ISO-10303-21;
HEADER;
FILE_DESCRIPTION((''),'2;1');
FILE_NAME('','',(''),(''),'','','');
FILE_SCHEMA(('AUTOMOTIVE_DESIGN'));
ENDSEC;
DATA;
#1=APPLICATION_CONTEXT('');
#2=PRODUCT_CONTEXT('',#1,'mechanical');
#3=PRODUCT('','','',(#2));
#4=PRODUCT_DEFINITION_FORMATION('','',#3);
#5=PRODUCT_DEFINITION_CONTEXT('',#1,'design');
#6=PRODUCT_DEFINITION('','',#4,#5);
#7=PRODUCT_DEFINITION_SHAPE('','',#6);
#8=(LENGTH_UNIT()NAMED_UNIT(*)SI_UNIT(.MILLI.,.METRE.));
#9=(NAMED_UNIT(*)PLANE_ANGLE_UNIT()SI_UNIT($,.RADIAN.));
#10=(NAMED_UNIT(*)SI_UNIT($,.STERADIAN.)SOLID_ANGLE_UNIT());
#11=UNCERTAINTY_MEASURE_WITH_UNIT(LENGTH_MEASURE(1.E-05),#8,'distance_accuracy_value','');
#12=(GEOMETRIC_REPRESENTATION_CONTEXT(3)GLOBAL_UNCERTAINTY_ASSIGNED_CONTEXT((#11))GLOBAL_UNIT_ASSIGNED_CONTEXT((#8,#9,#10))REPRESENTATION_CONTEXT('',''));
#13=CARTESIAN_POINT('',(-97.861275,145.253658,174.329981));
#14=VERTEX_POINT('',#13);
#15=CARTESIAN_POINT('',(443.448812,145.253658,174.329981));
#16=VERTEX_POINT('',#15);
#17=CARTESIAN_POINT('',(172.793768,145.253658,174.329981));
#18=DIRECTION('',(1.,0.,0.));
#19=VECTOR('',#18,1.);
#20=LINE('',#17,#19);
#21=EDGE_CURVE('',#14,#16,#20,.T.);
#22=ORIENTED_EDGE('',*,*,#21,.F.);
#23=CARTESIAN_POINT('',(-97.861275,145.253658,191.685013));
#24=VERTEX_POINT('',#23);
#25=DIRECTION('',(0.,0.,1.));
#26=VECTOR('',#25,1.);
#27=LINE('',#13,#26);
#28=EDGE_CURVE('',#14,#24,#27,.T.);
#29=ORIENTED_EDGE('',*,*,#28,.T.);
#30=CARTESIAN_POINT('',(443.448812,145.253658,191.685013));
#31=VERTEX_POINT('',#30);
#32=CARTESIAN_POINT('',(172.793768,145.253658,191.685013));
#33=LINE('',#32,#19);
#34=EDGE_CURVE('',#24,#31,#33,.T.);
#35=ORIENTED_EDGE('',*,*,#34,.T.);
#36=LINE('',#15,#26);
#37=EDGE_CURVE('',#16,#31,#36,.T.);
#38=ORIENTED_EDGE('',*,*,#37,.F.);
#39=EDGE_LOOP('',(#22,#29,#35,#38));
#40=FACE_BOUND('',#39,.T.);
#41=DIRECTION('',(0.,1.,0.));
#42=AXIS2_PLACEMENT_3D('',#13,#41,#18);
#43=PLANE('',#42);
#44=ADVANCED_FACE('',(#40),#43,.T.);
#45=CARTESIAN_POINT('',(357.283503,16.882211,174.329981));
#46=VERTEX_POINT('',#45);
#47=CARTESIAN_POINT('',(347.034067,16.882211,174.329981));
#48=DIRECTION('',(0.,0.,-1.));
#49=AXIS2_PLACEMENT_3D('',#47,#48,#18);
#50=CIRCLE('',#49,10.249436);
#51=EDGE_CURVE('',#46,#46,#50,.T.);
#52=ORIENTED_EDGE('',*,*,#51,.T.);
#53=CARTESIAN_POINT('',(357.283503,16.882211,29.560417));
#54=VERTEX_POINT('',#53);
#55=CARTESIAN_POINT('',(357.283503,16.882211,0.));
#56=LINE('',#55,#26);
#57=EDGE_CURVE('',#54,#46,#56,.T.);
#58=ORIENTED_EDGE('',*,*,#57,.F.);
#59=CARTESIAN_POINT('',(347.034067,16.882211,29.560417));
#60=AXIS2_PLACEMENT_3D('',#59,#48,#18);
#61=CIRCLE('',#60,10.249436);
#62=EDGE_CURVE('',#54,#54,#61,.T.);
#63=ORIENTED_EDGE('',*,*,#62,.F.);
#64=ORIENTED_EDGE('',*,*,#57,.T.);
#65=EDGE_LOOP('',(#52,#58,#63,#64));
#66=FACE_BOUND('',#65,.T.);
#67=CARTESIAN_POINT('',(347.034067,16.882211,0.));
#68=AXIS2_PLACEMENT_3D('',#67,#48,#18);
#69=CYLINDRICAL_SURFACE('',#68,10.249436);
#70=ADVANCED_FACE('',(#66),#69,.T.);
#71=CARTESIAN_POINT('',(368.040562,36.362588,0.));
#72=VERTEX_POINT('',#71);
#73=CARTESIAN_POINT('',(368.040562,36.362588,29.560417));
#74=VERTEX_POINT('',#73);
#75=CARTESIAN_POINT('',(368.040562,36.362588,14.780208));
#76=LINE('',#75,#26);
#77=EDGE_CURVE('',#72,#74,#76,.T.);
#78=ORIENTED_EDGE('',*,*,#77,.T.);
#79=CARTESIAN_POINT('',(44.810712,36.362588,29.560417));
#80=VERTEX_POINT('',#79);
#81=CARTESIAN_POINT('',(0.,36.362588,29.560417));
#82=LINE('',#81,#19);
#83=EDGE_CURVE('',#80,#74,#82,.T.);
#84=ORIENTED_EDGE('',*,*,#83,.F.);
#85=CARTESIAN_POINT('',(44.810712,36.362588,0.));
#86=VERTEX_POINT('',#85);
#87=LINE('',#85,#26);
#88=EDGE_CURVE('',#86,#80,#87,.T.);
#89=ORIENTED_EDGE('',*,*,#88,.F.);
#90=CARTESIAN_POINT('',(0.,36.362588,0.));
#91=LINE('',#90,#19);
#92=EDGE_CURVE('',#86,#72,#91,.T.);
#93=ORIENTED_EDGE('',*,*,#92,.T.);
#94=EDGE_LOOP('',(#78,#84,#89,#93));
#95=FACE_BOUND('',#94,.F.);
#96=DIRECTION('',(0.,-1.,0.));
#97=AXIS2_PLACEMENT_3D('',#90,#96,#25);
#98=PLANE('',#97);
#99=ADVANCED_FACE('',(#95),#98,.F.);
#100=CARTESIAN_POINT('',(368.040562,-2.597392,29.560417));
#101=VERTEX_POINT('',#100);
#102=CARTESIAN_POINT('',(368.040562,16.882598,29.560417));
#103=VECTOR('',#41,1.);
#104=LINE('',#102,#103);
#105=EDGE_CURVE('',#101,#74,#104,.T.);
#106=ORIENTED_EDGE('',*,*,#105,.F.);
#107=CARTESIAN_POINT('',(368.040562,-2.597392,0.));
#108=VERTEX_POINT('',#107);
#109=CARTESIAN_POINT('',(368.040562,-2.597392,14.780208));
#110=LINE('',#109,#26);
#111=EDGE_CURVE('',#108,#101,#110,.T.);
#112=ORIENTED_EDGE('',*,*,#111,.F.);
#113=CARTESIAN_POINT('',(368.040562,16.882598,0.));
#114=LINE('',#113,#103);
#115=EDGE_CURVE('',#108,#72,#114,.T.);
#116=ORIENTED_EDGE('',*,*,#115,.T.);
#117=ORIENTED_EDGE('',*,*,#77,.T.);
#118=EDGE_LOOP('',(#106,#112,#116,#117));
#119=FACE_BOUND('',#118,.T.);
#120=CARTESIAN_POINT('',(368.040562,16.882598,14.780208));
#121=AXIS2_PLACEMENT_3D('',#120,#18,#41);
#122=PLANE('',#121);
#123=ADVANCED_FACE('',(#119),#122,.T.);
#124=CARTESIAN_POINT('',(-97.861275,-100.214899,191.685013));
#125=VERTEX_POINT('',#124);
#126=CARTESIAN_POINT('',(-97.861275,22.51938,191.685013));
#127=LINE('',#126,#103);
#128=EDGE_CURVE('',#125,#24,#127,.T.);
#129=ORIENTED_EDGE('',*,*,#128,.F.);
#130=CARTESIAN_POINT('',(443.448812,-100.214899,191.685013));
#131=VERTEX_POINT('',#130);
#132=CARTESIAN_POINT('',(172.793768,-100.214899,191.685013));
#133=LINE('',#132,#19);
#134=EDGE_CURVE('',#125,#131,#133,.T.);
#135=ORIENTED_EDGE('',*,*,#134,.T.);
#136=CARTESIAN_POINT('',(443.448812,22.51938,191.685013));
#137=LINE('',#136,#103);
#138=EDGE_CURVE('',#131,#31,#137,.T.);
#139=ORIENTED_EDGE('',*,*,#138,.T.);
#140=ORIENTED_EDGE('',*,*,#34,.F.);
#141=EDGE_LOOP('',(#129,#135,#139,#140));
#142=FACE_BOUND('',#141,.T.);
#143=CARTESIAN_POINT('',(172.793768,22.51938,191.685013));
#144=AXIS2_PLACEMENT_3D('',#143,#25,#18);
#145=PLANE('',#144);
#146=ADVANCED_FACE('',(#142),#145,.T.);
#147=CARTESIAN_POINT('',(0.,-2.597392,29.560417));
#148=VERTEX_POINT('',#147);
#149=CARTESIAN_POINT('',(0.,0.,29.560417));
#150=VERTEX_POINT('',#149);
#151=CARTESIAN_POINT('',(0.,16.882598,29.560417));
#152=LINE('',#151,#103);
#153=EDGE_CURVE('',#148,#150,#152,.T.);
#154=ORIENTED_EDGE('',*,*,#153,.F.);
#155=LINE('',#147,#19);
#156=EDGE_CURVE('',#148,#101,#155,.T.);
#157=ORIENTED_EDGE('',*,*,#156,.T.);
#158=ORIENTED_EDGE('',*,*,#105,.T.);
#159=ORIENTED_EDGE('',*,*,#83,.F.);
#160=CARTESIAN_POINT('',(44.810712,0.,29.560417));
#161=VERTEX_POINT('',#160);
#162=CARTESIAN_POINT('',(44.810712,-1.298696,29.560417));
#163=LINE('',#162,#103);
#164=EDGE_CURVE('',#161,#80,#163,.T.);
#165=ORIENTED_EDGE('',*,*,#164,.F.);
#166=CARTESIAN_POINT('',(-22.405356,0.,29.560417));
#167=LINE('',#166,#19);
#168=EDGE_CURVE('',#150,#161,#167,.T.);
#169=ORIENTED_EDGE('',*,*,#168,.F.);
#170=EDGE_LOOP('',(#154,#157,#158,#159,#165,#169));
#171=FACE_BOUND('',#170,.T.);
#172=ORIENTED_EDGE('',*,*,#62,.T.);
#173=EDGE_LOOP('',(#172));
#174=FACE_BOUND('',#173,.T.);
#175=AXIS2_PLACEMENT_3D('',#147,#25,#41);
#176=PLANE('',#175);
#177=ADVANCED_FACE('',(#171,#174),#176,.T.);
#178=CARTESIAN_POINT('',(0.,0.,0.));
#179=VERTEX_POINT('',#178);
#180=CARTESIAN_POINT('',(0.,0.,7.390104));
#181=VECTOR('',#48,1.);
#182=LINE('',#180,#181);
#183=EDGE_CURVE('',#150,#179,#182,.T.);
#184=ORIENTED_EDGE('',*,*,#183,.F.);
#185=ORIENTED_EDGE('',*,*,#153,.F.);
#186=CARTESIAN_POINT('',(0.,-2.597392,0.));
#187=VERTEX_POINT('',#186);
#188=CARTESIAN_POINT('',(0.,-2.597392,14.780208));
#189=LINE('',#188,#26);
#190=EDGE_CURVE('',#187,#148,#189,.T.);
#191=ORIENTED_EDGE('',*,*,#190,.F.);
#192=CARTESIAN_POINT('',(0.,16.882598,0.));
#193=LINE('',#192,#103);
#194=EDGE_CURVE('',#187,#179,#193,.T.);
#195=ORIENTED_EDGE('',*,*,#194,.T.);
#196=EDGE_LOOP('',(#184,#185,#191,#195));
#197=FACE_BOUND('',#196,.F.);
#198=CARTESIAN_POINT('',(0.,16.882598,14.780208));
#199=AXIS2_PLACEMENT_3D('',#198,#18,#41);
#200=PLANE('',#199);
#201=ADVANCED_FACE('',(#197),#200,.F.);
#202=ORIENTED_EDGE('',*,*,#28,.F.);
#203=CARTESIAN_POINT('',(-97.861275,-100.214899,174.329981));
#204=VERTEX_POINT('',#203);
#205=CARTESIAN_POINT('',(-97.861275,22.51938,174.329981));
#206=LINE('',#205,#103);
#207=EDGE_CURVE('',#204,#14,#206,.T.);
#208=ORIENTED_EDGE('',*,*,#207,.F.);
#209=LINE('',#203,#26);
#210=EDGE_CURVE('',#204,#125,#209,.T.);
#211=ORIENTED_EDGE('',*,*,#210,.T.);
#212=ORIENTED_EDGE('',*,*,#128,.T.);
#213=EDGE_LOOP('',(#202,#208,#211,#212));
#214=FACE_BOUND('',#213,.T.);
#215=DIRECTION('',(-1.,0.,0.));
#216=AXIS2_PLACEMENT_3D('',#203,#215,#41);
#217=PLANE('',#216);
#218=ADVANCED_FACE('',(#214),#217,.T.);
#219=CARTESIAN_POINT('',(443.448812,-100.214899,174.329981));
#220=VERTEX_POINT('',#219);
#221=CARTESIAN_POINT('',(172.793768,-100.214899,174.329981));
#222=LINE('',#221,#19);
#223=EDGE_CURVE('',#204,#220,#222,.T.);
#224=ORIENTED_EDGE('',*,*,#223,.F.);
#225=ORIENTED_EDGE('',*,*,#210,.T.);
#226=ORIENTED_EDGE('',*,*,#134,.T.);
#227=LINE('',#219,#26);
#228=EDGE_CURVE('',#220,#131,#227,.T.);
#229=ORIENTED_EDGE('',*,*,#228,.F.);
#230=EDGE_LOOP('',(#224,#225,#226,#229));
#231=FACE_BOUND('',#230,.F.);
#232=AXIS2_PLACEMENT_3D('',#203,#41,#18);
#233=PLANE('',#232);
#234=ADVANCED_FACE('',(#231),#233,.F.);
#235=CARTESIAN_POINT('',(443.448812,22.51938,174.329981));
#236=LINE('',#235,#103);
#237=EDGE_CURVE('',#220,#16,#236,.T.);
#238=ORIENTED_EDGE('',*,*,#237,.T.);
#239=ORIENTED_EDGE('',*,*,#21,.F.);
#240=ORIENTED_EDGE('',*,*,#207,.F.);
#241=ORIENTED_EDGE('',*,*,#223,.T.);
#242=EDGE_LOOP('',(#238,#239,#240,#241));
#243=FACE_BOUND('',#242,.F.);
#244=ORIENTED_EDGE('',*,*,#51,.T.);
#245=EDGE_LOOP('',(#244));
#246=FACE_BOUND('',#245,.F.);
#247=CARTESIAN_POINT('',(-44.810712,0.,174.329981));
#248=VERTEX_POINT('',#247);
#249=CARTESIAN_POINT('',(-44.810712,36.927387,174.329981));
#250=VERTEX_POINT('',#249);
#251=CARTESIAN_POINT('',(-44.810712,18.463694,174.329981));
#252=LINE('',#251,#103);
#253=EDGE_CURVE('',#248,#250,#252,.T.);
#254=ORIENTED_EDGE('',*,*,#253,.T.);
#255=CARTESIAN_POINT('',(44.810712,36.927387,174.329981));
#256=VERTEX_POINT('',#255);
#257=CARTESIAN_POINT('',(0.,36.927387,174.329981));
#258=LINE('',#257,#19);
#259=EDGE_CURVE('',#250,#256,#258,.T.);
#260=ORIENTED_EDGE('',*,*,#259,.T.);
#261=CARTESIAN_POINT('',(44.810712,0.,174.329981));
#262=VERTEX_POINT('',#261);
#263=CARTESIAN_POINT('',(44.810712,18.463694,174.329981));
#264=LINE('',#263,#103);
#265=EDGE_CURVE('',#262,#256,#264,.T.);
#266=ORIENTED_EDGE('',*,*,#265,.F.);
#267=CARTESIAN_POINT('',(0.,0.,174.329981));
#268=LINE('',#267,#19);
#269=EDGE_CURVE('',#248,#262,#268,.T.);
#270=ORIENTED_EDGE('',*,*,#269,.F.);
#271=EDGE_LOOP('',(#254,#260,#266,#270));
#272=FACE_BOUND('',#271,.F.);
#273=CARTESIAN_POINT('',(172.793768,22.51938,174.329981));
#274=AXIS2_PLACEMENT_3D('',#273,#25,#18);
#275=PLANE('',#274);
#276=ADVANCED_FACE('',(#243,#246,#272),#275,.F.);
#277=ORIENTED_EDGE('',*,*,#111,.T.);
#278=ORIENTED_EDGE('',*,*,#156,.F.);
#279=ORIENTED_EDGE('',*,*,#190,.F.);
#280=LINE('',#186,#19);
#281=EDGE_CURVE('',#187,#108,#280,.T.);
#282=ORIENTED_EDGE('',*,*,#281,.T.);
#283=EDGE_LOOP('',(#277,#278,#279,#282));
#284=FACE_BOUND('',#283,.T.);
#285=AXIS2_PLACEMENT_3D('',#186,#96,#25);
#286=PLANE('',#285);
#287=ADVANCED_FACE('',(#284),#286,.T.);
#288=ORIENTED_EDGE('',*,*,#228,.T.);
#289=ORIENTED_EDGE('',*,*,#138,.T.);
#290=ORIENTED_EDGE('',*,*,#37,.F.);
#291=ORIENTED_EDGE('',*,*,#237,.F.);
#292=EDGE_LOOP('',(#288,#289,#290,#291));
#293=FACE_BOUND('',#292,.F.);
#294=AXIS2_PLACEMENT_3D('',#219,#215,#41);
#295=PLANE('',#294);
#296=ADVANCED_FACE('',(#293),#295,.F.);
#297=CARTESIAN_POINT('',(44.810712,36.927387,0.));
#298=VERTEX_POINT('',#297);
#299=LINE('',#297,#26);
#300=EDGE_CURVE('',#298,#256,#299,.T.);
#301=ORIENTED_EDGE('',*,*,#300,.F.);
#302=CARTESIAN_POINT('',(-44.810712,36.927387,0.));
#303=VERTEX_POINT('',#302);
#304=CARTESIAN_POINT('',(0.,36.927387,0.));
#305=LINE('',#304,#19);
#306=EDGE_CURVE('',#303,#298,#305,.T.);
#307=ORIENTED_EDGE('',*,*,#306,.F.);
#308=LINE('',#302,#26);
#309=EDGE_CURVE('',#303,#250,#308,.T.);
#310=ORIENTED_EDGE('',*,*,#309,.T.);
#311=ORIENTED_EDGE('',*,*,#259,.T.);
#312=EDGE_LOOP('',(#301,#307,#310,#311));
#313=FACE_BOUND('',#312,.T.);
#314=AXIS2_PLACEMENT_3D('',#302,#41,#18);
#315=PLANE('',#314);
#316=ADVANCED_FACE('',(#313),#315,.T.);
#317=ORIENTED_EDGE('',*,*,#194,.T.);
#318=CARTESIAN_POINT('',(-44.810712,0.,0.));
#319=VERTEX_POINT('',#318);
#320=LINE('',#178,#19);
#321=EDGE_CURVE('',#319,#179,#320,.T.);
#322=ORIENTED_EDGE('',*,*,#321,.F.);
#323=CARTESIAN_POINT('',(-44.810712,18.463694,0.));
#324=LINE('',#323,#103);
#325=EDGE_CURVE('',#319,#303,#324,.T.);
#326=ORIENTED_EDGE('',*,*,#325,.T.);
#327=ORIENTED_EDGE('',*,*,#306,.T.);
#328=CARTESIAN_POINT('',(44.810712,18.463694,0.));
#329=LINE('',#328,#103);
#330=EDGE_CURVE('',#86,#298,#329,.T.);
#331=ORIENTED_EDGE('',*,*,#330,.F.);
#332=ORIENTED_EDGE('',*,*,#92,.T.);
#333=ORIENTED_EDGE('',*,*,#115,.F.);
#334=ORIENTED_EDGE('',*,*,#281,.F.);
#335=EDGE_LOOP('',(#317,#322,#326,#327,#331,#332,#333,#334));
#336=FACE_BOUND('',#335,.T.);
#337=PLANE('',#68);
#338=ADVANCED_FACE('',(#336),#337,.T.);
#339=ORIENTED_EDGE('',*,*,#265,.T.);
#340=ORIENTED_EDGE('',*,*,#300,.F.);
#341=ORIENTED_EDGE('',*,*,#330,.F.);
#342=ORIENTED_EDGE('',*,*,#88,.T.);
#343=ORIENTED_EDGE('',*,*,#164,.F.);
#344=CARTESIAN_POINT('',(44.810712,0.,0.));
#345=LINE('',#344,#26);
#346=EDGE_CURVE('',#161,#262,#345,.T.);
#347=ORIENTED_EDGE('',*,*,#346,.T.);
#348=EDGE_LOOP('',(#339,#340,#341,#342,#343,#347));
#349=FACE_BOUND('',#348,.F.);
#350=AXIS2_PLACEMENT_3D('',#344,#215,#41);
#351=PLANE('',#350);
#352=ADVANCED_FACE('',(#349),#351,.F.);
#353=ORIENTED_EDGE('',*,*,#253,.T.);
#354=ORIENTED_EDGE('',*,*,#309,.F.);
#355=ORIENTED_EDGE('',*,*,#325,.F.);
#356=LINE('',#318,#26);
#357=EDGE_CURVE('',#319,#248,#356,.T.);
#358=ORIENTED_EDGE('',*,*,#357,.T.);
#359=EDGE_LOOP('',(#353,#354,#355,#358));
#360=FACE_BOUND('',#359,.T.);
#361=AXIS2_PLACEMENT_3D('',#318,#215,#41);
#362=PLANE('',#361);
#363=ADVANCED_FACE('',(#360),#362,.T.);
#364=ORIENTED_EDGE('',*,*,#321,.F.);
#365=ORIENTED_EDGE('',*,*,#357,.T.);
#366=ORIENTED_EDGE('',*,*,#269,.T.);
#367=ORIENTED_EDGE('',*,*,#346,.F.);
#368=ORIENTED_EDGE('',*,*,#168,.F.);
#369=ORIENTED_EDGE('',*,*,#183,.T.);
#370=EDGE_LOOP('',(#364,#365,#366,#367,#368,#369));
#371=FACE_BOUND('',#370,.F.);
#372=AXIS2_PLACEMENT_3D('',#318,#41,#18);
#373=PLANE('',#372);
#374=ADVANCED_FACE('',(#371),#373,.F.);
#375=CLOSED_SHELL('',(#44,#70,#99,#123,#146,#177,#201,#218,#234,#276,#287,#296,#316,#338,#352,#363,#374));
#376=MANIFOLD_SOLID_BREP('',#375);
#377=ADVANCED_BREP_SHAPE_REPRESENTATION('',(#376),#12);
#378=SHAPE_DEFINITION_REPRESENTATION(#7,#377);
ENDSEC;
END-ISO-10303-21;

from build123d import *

# Parameters (mm, degrees)
F0_W     = 89.621424675
F0_H     = 36.9273871183
F1_DEPTH = 174.3299812078
F3_W     = 541.3100868464
F3_H     = 245.468556881
F4_DEPTH = 17.3550322652
F2_W     = 38.959980011
F2_H     = 29.5604169369
F5_DEPTH = 368.040561676
F6_R     = 10.2494359016
F7_DEPTH = 180.2812367678


with BuildPart() as f1:
    # F0 (on Top) → F1 (new body)
    with BuildSketch(Plane.XY):
        with Locations((0, 18.4636935592)):
            Rectangle(F0_W, F0_H)
    extrude(amount=F1_DEPTH)

    # F3 (on face) → F4 (join)
    with BuildSketch(Plane.XY.offset(174.3299812078)):
        with Locations((172.7937683463, 22.5193798542)):
            Rectangle(F3_W, F3_H)
    extrude(amount=F4_DEPTH)

    # F2 (on Right) → F5 (join)
    with BuildSketch(Plane.YZ):
        with Locations((16.8825984001, 14.7802084684)):
            Rectangle(F2_W, F2_H)
    extrude(amount=F5_DEPTH)

    # F6 (on face) → F7 (join)
    with BuildSketch(Plane(origin=(0, 0, 0), x_dir=(1, 0, 0), z_dir=(0, 0, -1))):
        with Locations((347.0340669155, -16.8822109699)):
            Circle(F6_R)
    extrude(amount=-F7_DEPTH)


solid = f1.part
